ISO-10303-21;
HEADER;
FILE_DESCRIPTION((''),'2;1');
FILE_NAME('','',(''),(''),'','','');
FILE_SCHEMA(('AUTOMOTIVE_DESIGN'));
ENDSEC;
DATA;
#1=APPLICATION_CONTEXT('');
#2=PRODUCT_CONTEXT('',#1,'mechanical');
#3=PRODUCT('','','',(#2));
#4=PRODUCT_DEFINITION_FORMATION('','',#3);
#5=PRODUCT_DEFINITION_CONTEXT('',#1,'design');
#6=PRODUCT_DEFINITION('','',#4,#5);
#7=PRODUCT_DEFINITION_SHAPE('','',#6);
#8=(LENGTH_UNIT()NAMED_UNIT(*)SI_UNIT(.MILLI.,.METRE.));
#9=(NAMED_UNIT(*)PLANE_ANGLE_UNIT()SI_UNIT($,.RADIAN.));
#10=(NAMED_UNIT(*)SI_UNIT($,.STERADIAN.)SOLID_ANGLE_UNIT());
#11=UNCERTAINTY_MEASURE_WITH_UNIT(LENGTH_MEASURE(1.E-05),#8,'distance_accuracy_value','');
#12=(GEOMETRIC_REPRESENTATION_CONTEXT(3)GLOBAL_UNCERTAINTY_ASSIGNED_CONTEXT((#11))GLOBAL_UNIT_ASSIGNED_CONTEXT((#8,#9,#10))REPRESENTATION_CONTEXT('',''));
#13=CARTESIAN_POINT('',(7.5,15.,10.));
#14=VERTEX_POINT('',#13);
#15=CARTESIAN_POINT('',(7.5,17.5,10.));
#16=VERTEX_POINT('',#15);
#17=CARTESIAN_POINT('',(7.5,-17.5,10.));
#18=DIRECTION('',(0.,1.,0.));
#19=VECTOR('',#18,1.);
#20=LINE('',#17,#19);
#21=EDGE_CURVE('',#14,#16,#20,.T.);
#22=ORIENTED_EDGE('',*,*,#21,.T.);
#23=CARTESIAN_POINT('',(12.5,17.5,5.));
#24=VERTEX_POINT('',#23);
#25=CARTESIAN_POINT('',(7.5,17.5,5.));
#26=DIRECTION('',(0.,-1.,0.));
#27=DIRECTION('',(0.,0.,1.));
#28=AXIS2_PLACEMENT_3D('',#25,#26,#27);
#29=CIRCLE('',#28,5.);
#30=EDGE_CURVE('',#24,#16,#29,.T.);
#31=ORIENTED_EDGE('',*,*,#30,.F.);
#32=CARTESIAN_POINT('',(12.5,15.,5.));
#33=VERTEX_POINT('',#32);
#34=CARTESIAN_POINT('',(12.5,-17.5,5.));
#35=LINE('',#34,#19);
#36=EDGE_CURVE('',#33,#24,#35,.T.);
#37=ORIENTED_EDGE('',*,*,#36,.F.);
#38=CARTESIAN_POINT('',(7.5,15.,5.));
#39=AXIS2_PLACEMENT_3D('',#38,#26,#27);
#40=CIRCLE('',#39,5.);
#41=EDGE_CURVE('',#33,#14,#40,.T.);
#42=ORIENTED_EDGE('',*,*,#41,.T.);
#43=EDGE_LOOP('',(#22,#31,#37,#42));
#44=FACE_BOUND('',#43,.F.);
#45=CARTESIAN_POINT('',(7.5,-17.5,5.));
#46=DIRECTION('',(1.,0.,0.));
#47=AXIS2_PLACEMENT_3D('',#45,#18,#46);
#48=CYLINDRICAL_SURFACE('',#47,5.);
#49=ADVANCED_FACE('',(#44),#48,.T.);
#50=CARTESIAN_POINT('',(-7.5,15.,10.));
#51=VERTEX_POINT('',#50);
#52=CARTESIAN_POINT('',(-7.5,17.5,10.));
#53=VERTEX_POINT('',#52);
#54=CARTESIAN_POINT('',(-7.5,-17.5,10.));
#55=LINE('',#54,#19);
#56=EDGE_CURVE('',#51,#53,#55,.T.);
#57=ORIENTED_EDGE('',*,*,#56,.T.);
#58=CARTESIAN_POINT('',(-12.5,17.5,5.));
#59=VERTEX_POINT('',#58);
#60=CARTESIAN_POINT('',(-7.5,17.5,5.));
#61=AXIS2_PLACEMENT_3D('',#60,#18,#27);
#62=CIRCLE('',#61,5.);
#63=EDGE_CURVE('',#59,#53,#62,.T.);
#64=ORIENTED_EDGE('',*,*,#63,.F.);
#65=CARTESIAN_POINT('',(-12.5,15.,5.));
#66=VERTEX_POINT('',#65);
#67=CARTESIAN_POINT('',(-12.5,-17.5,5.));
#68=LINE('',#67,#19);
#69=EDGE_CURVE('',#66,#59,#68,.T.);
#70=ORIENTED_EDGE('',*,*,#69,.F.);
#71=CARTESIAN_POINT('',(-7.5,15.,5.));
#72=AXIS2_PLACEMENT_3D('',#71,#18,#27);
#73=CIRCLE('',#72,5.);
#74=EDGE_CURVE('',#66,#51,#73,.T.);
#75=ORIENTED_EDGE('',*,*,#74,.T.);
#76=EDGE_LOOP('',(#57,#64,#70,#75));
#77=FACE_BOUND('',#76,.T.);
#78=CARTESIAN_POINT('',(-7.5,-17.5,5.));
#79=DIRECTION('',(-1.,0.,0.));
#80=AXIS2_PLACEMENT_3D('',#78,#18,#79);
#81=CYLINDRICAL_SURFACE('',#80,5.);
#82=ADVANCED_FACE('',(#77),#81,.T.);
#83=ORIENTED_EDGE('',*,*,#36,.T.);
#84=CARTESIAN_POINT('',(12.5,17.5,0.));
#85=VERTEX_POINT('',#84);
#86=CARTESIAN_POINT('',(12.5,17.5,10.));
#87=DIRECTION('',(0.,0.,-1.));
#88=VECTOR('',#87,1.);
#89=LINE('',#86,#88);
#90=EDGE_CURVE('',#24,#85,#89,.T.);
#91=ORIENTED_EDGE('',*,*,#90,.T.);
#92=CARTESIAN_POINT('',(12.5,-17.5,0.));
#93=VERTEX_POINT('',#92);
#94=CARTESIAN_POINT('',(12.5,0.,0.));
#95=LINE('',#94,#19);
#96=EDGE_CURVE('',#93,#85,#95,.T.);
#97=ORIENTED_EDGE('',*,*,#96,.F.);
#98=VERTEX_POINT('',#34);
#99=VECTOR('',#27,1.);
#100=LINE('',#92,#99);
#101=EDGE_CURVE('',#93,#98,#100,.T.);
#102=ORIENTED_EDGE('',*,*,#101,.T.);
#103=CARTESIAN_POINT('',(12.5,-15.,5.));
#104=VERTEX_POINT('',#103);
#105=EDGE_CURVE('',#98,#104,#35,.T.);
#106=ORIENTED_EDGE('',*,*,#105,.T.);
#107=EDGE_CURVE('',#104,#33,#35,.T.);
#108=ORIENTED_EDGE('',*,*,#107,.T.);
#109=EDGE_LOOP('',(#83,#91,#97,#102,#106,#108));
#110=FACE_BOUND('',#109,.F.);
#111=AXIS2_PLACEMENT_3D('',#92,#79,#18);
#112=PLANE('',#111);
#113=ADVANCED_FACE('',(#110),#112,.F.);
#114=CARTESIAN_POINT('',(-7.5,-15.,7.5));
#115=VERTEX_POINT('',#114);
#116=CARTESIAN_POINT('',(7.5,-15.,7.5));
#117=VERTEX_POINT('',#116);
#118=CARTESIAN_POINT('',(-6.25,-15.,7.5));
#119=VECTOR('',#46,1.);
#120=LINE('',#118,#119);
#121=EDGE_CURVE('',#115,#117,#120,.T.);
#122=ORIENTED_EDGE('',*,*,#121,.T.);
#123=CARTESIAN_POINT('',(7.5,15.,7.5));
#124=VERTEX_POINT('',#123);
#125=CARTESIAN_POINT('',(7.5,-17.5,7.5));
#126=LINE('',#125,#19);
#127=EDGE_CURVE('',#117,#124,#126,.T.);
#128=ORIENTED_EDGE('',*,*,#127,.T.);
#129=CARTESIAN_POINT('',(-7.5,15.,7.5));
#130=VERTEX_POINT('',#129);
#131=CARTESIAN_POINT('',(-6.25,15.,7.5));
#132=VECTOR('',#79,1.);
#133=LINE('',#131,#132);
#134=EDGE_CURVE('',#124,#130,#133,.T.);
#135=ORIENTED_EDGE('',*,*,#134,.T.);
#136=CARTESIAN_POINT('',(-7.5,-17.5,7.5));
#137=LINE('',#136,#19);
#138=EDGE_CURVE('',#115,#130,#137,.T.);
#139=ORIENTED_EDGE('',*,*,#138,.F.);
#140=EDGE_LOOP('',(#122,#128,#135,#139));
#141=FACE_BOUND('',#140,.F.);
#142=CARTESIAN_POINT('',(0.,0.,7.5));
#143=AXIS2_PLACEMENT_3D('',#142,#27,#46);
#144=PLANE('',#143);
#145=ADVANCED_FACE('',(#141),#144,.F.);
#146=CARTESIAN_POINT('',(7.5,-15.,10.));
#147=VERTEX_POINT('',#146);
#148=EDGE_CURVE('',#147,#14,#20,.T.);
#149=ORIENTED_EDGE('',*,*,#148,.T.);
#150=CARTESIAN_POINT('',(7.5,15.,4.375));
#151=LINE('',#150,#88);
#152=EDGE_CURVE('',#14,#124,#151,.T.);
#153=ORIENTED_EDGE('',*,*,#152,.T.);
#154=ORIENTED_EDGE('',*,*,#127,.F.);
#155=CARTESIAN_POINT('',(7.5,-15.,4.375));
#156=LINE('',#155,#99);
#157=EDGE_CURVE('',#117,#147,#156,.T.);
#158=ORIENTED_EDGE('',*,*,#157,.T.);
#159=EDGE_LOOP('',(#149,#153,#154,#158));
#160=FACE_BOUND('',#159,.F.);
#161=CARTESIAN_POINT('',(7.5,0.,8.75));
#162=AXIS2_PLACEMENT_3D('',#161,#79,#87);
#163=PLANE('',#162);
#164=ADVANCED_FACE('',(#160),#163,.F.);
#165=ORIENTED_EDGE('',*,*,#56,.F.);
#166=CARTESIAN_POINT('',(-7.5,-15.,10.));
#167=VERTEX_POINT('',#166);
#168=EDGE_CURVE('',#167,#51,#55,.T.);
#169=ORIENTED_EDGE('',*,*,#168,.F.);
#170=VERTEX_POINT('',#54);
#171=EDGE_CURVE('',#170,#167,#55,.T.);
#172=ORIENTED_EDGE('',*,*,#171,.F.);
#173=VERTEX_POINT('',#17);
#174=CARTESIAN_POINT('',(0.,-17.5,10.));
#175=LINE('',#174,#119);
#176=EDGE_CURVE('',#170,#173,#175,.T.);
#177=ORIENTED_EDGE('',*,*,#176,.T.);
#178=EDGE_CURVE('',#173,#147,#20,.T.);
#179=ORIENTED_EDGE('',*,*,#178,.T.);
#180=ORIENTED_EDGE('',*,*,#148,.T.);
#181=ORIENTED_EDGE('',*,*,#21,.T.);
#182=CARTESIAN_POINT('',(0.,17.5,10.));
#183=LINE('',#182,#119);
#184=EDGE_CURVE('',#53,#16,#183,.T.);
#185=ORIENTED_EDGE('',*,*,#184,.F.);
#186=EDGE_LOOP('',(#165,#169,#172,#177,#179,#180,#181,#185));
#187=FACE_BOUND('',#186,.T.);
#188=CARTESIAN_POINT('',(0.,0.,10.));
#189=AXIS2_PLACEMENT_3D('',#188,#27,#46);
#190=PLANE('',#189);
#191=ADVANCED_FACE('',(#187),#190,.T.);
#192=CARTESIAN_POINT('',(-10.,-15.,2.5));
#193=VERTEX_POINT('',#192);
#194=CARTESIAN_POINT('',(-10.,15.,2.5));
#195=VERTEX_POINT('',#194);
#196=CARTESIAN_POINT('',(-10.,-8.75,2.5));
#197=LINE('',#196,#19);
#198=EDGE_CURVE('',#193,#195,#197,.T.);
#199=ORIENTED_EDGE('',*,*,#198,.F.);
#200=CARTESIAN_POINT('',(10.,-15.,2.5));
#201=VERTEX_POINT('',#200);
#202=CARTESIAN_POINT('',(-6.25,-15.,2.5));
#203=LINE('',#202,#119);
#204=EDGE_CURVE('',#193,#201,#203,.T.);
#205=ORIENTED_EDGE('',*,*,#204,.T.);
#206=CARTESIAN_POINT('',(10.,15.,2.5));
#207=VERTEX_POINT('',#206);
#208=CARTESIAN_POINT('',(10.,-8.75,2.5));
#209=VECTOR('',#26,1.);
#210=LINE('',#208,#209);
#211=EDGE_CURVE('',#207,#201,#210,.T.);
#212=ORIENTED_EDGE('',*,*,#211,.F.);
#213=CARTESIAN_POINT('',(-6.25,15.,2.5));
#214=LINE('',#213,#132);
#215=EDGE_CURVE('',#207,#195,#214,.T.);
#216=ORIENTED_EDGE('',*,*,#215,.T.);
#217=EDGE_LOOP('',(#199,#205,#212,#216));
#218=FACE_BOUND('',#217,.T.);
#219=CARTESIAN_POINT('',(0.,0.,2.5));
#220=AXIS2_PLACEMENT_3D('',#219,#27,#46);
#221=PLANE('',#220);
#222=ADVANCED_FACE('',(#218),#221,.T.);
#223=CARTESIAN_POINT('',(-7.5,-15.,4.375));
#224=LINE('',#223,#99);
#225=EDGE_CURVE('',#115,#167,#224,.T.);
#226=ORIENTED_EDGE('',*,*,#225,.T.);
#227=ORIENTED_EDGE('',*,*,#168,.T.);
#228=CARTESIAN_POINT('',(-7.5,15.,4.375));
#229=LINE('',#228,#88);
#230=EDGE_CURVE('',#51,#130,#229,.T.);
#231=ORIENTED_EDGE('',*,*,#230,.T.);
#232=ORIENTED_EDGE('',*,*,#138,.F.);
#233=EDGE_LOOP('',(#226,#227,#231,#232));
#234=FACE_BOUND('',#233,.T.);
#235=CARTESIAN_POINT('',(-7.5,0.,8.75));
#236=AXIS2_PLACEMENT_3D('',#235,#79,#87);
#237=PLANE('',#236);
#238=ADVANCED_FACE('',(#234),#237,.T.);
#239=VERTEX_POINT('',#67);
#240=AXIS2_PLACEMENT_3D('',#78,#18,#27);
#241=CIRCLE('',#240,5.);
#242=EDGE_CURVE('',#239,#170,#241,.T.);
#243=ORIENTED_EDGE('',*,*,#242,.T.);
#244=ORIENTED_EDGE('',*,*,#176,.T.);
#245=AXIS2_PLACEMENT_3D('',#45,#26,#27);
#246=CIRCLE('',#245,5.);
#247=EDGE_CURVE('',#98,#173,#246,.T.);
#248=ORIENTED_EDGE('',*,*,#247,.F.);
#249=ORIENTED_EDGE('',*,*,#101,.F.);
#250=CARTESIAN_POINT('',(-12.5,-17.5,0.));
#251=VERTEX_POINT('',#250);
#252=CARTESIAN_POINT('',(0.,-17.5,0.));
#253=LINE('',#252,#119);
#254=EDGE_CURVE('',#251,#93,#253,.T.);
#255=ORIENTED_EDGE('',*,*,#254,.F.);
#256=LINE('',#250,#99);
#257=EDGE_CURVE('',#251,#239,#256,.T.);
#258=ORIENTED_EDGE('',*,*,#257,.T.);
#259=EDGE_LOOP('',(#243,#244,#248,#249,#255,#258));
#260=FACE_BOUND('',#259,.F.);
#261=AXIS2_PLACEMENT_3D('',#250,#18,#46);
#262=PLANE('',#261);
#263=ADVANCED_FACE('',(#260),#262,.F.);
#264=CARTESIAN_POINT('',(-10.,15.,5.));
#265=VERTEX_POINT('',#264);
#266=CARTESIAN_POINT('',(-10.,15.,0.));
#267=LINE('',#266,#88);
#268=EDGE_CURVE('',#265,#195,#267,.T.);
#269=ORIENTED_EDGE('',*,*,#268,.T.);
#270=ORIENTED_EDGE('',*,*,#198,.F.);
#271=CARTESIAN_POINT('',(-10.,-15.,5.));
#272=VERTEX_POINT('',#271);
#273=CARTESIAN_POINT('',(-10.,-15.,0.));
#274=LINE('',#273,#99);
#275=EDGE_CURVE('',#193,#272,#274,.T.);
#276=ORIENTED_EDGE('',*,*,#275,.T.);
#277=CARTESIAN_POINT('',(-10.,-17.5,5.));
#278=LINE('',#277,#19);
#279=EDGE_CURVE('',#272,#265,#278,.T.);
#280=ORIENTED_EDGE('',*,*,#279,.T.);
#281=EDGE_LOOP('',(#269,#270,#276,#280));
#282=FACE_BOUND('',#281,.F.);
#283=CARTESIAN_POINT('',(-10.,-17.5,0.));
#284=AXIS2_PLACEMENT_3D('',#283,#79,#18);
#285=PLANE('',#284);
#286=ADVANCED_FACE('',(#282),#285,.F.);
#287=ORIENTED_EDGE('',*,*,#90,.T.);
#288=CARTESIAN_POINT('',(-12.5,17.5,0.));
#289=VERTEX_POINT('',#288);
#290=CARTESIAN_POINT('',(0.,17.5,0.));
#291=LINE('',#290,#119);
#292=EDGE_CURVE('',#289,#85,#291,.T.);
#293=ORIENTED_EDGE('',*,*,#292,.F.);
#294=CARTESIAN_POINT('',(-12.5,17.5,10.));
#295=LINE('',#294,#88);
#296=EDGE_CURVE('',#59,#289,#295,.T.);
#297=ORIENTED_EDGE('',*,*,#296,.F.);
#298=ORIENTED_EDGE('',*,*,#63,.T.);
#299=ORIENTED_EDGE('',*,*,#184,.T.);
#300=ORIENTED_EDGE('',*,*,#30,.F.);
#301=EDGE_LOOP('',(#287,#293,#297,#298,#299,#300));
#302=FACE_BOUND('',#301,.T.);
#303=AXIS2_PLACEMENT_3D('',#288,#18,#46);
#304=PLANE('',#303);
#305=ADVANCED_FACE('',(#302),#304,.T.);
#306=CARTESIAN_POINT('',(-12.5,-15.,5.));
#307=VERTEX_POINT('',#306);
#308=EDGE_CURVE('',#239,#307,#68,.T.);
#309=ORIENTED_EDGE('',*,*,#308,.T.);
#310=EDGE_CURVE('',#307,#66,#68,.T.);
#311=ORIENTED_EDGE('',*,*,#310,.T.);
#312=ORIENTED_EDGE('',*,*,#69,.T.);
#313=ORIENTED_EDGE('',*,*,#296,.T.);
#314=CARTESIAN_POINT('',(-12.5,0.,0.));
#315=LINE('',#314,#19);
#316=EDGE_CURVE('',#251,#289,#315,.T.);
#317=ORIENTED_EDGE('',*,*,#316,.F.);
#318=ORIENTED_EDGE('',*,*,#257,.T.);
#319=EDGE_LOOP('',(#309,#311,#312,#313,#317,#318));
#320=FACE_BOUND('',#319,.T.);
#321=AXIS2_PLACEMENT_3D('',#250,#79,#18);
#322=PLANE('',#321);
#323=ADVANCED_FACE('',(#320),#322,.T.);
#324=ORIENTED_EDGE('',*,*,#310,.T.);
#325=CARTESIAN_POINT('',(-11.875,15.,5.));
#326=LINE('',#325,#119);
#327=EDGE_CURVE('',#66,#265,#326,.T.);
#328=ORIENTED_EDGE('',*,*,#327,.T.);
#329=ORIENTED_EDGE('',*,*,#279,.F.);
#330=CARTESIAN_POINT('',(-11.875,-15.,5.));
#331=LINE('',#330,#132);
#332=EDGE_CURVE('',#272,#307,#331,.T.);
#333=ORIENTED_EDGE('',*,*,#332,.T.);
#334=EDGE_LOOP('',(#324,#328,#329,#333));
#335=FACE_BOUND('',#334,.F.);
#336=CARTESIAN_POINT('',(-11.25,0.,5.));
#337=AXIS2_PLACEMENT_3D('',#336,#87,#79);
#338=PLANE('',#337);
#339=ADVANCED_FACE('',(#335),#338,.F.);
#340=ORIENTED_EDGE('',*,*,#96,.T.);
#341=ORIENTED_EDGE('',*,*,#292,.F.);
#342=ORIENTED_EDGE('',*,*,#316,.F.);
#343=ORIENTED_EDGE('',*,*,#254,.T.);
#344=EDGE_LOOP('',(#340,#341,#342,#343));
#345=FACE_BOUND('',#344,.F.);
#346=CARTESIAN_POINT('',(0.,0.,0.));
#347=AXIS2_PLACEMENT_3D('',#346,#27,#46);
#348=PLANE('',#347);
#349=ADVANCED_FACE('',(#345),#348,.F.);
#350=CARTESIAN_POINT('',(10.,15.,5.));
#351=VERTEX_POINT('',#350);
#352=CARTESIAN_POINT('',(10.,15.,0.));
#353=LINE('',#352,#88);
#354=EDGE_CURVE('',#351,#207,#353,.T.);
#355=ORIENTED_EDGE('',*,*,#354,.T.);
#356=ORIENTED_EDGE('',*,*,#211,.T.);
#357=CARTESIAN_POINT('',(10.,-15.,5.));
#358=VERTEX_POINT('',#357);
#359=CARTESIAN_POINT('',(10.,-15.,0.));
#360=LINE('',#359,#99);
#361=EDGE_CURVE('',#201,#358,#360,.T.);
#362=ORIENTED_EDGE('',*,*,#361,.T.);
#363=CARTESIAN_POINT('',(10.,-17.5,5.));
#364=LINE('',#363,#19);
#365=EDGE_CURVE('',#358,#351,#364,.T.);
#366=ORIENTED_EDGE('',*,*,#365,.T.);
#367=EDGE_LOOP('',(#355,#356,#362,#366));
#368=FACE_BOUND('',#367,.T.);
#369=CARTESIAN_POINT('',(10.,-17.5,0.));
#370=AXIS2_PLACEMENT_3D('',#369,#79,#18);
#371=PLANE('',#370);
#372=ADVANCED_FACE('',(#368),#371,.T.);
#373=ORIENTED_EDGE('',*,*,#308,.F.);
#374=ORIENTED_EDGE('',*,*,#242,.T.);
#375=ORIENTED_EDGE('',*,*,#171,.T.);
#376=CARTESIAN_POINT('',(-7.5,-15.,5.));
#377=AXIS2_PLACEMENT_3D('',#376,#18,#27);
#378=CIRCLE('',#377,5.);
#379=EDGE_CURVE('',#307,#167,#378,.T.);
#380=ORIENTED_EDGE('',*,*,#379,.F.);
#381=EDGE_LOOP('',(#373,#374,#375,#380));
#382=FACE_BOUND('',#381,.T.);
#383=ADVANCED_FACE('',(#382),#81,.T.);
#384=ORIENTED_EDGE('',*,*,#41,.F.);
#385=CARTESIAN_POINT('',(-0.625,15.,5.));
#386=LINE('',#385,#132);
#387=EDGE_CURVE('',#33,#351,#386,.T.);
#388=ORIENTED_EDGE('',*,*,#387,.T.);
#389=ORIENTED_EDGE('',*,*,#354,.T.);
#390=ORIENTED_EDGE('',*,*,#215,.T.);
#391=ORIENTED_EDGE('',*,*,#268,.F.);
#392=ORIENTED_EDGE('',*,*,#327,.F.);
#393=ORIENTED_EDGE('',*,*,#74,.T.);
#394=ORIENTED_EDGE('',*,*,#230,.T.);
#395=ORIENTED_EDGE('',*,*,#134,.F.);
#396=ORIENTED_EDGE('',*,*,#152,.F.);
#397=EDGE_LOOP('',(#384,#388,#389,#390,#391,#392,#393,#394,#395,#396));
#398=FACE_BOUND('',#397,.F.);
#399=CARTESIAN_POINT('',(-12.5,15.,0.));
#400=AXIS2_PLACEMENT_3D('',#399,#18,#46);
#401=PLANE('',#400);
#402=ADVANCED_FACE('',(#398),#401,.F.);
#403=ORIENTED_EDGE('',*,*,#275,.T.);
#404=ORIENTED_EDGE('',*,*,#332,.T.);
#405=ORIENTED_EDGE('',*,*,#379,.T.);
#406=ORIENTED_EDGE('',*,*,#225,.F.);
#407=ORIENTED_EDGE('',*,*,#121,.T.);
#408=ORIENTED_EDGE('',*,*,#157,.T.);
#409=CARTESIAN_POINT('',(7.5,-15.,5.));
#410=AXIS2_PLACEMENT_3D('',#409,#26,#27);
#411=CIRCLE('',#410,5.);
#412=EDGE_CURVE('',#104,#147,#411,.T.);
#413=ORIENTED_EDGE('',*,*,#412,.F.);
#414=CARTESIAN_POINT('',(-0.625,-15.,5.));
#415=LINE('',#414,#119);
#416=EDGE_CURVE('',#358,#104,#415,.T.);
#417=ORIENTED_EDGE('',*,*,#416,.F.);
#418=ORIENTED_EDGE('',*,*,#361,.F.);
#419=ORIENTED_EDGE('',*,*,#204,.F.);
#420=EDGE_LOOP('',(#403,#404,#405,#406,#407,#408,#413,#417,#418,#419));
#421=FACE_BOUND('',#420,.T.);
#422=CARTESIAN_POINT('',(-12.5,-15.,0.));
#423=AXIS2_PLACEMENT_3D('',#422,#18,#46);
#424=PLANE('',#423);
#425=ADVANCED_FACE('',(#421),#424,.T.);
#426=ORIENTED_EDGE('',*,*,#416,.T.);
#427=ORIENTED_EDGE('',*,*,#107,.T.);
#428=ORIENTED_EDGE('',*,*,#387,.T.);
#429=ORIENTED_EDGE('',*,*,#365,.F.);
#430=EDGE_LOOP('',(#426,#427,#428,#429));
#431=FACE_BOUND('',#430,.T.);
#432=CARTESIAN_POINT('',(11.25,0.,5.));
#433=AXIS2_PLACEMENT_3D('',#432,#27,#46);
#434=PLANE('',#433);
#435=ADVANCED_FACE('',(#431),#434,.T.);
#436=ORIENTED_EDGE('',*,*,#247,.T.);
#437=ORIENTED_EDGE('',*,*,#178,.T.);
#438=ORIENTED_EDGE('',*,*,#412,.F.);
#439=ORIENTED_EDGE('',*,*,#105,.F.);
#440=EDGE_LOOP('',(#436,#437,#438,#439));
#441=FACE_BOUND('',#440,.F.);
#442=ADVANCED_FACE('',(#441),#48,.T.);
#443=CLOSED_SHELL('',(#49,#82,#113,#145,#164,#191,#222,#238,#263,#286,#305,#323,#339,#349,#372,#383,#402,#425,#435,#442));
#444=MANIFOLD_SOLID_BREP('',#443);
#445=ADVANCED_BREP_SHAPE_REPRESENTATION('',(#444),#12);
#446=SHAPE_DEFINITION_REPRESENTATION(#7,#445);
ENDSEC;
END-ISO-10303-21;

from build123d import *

# Parameters (mm, degrees)
F0_W     = 25
F0_H     = 35
F1_DEPTH = 5
F2_W     = 25
F2_H     = 35
F3_DEPTH = 10
F4_R     = 5
F5_T     = 2.5


# Not quite as in the source:
# - a shell that OpenCascade refuses in one call is made with other operations: the cavity is built on its own and cut out


with BuildPart() as f1:
    # F0 (on Top) → F1 (new body)
    with BuildSketch(Plane.XY):
        Rectangle(F0_W, F0_H)
    extrude(amount=F1_DEPTH)

    # F2 (on Top) → F3 (join)
    with BuildSketch(Plane.XY):
        Rectangle(F2_W, F2_H)
    extrude(amount=F3_DEPTH)

    # F4
    f4_edges = [f1.edges().sort_by_distance(p)[0] for p in [
        (-12.5, 0, 10),
        (12.5, 0, 10),
    ]]
    fillet(f4_edges, radius=F4_R)

    # F5: shell of thickness 2.5, made by hand


with BuildPart() as f5_core1:
    # F5_t2: copy of F1
    add(f1.part)

    # the walls: a layer under each face that stays
    f5_faces = [f5_core1.faces().sort_by_distance(p)[0] for p in [
        (0, -17.5, 5),
        (-12.5, 0, 2.5),
        (0, 0, 0),
        (0, 0, 10),
        (12.5, 0, 2.5),
        (0, 17.5, 5),
    ]]
    thicken(f5_faces, amount=-F5_T, mode=Mode.SUBTRACT)


with BuildPart() as f1_1:
    add(f1.part)

    # what is left inside the walls is the cavity
    f5_cavity = [f5_core1.part.solids().sort_by_distance(p)[0] for p in [
        (0, -5, 2.525),
    ]]
    add(f5_cavity, mode=Mode.SUBTRACT)


solid = f1_1.part
